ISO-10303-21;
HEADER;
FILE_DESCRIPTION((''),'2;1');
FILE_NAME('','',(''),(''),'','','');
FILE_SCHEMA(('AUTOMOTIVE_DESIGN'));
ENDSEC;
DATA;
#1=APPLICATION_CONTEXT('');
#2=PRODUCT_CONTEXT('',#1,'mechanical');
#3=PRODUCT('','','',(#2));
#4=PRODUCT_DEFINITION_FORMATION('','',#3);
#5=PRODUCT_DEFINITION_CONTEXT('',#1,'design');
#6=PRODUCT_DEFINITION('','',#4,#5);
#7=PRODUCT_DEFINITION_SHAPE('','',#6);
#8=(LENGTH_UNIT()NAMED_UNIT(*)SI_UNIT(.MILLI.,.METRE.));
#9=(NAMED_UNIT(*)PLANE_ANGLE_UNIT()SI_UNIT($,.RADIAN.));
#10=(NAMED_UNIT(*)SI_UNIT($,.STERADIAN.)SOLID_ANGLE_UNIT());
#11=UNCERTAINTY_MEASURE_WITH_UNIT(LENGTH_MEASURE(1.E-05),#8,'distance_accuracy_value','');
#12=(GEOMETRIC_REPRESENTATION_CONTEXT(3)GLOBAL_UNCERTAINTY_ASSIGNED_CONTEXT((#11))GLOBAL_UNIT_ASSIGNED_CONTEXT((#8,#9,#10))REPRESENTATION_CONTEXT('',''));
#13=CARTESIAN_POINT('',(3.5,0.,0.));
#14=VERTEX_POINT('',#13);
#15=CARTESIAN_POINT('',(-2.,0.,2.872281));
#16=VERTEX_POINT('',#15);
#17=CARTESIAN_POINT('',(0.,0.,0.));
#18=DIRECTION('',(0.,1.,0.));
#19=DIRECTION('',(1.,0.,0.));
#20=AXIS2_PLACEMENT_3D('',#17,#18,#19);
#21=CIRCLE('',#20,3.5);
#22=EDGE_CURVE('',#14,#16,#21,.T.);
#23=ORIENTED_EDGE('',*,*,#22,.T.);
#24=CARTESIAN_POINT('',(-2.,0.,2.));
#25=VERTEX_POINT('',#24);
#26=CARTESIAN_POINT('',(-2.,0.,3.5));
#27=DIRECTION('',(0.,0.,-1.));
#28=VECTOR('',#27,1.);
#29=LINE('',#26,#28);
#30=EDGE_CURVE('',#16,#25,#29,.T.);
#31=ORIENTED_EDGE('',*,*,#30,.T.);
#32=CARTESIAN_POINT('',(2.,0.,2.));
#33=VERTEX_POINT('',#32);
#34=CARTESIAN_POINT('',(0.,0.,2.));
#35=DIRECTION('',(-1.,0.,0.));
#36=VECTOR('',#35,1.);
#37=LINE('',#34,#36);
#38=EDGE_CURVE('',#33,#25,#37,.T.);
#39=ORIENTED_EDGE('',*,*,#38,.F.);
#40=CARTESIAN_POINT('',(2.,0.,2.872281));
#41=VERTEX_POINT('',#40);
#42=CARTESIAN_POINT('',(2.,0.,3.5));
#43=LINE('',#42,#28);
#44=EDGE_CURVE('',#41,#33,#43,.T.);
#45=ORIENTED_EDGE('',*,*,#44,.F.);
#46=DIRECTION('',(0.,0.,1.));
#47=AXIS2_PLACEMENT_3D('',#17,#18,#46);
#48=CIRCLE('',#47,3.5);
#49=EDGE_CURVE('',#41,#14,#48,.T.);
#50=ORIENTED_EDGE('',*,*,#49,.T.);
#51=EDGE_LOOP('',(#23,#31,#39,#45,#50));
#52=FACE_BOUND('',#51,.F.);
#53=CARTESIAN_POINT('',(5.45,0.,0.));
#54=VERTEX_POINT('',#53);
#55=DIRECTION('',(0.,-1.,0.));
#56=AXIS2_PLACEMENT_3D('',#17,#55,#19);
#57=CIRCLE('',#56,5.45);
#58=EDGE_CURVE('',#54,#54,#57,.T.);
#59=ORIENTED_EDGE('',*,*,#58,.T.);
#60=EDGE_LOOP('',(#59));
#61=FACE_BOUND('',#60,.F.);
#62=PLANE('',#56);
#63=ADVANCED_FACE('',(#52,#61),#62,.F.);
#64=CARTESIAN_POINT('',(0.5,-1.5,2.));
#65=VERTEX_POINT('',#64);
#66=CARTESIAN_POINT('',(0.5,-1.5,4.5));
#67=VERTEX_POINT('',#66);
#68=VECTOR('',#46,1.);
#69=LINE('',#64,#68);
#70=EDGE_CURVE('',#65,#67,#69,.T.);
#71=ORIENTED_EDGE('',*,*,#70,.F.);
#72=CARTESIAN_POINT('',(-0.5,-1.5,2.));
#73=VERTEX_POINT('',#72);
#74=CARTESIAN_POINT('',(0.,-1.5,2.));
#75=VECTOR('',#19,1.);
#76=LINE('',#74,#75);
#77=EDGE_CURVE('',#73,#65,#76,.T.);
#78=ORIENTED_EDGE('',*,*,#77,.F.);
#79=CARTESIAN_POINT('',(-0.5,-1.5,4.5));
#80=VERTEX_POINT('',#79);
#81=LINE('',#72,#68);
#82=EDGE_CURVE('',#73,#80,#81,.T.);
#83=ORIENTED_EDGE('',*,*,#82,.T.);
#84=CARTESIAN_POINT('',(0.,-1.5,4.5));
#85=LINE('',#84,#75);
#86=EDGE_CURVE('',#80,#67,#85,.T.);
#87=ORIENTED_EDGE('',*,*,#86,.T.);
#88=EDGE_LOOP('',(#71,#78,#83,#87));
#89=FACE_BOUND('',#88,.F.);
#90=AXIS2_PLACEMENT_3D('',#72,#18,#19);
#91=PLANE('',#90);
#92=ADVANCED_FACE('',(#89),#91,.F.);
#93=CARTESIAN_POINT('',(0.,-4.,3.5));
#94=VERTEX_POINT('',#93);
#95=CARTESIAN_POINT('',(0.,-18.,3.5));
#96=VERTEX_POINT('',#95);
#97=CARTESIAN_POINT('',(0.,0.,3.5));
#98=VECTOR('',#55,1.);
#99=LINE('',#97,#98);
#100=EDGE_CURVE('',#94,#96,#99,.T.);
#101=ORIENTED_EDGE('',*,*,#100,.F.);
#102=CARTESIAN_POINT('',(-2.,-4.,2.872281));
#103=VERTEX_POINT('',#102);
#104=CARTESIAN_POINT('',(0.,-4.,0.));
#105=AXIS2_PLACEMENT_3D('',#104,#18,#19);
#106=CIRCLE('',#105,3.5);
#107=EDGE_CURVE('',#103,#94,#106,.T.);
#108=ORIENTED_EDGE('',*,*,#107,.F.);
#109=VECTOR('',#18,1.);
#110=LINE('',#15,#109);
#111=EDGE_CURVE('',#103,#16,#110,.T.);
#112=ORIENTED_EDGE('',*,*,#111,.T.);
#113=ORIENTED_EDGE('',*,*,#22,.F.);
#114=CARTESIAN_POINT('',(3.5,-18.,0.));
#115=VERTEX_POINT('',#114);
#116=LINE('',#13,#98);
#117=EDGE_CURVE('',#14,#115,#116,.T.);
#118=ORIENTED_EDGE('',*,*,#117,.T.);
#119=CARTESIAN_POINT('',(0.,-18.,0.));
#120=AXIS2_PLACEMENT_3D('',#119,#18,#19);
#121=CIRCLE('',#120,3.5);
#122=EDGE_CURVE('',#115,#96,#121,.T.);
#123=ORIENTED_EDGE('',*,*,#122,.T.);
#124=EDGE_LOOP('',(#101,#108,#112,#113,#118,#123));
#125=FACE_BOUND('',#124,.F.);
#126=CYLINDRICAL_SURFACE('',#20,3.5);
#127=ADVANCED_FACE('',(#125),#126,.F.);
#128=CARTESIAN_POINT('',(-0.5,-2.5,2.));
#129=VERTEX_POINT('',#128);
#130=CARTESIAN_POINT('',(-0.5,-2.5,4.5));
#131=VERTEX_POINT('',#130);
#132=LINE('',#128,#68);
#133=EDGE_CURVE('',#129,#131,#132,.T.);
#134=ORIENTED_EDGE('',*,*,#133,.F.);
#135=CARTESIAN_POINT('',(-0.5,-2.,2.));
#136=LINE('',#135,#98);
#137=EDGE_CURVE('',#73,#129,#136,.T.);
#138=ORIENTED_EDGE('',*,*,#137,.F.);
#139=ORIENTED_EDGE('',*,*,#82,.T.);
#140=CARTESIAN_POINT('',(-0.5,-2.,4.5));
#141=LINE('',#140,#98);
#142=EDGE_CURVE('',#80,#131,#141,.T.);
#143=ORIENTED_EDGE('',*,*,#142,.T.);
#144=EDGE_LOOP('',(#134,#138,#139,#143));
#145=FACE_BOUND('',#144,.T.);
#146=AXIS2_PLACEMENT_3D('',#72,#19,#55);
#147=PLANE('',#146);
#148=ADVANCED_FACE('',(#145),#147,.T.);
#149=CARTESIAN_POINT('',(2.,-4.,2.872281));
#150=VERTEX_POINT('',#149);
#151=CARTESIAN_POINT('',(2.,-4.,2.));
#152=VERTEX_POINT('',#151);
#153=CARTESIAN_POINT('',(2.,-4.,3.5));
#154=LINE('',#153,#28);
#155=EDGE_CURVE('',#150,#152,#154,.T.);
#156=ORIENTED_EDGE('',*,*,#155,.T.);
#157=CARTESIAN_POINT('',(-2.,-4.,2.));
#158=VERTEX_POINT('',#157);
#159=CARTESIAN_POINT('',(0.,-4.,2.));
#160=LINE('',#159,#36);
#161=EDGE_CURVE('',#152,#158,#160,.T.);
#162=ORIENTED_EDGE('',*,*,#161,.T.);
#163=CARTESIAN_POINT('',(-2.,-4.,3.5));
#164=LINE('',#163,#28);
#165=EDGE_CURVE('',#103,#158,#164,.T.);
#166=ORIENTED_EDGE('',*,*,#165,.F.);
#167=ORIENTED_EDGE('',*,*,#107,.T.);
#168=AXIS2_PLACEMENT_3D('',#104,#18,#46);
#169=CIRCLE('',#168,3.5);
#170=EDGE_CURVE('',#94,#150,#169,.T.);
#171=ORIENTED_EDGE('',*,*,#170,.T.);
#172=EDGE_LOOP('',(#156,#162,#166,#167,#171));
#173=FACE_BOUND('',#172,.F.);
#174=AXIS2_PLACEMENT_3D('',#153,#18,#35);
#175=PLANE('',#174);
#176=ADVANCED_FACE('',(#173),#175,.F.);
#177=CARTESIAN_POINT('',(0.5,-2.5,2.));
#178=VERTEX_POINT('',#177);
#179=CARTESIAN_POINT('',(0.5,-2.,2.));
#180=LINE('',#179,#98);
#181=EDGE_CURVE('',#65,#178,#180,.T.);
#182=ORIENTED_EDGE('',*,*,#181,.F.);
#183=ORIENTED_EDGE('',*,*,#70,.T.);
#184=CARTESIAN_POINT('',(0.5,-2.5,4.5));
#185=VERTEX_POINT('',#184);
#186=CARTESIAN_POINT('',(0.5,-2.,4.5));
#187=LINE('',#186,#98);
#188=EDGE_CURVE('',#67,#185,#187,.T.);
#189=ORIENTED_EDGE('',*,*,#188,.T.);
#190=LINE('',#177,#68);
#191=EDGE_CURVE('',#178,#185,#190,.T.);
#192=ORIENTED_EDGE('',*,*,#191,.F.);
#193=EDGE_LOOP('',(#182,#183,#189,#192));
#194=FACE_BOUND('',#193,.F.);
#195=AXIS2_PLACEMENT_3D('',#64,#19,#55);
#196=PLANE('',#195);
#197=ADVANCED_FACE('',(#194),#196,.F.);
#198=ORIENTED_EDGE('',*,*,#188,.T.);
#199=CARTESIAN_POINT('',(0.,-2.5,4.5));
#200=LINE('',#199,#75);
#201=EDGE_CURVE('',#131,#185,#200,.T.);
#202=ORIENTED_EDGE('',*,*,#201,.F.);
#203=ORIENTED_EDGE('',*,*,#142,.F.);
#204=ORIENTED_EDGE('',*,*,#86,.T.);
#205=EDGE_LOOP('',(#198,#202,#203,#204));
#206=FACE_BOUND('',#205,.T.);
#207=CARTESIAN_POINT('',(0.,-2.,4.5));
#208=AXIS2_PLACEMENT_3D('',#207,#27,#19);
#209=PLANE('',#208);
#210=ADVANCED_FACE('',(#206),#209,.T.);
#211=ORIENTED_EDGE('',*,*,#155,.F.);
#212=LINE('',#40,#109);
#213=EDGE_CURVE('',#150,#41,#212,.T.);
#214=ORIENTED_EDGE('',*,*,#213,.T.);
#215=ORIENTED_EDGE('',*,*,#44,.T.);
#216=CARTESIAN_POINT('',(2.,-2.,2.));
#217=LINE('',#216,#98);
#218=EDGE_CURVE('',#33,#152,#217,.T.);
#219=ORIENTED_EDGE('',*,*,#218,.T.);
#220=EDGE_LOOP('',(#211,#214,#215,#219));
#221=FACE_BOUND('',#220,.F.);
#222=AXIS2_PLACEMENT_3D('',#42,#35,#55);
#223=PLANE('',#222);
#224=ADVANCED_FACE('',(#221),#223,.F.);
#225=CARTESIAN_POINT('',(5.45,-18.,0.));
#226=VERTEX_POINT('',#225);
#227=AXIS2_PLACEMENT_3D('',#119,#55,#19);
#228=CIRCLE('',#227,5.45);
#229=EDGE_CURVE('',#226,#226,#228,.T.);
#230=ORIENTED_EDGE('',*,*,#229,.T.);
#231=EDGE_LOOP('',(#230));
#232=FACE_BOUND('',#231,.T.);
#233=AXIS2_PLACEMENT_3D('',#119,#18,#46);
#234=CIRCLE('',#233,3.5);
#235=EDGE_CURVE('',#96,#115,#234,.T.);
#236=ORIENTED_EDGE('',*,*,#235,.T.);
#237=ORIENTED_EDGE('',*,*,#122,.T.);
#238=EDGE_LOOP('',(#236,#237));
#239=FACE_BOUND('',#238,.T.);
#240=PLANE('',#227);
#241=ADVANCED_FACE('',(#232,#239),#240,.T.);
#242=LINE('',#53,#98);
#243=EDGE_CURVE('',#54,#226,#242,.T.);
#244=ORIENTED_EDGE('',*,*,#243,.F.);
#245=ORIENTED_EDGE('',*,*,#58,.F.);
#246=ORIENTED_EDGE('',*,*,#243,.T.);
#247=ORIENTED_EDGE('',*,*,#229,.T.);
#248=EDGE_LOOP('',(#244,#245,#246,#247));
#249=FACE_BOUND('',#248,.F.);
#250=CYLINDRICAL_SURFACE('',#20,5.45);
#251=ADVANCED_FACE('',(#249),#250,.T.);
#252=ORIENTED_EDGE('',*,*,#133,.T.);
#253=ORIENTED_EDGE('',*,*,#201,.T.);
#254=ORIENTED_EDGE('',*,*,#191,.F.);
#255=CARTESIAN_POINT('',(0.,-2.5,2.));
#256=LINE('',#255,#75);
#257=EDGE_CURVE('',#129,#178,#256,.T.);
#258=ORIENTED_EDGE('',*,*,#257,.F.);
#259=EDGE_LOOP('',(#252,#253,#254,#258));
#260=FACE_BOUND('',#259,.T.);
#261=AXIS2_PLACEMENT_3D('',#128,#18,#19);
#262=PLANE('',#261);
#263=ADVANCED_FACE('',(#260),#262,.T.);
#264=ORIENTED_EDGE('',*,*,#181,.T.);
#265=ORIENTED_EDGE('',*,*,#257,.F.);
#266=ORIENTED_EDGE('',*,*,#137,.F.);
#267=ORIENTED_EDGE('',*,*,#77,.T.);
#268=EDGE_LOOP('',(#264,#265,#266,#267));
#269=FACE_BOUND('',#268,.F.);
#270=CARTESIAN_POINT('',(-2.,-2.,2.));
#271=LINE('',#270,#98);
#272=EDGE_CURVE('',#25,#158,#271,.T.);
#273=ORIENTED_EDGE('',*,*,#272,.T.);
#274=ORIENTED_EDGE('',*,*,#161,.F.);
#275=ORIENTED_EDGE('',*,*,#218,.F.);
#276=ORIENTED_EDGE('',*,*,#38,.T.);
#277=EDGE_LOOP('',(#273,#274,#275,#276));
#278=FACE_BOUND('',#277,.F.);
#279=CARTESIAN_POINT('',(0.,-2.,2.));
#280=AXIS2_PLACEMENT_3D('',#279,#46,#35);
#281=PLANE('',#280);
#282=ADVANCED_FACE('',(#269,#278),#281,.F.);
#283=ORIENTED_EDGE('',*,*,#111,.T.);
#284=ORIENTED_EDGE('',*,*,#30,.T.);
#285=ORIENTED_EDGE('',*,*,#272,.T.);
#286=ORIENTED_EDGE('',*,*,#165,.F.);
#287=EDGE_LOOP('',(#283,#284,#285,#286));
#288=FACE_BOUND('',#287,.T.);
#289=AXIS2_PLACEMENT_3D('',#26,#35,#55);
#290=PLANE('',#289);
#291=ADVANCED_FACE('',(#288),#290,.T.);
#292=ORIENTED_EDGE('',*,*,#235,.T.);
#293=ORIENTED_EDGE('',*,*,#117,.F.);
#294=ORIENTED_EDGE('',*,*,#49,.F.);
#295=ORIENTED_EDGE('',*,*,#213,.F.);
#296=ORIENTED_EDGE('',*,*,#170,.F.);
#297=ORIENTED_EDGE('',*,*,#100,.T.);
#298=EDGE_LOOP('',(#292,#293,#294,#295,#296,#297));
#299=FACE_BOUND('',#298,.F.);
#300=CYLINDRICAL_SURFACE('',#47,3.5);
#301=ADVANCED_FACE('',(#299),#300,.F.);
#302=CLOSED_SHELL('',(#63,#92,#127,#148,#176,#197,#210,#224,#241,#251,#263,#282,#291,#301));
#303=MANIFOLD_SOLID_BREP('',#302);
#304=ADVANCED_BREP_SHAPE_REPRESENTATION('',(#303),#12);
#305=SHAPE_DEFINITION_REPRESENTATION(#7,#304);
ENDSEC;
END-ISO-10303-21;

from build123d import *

# Parameters (mm, degrees)
F0_R     = 5.45
F1_DEPTH = 18
F2_E2_W  = 4
F2_E2_H  = 4
F3_DEPTH = 1.5
F4_W     = 1
F4_H     = 1
F5_DEPTH = 2.5


with BuildPart() as f1:
    # F0 (on Front) → F1 (new body)
    with BuildSketch(Plane.XZ):
        Circle(F0_R)
        with BuildLine():
            ThreePointArc((0, 3.5), (2.4748737342, 2.4748737342), (3.5, 0))
            ThreePointArc((3.5, 0), (-2.4748737342, -2.4748737342), (0, 3.5))
        make_face(mode=Mode.SUBTRACT)
    extrude(amount=F1_DEPTH)

    # F2_E2 (on explicit) → F3 (join)
    with BuildSketch(Plane(origin=(2, 0, 3.5), x_dir=(-1, 0, 0), z_dir=(0, 0, 1))):
        with Locations((2, 2)):
            Rectangle(F2_E2_W, F2_E2_H)
    extrude(amount=-F3_DEPTH)

    # F4 (on face) → F5 (cut)
    with BuildSketch(Plane(origin=(0, 0, 2), x_dir=(1, 0, 0), z_dir=(0, 0, -1))):
        with Locations((0, 2)):
            Rectangle(F4_W, F4_H)
    extrude(amount=-F5_DEPTH, mode=Mode.SUBTRACT)


solid = f1.part
